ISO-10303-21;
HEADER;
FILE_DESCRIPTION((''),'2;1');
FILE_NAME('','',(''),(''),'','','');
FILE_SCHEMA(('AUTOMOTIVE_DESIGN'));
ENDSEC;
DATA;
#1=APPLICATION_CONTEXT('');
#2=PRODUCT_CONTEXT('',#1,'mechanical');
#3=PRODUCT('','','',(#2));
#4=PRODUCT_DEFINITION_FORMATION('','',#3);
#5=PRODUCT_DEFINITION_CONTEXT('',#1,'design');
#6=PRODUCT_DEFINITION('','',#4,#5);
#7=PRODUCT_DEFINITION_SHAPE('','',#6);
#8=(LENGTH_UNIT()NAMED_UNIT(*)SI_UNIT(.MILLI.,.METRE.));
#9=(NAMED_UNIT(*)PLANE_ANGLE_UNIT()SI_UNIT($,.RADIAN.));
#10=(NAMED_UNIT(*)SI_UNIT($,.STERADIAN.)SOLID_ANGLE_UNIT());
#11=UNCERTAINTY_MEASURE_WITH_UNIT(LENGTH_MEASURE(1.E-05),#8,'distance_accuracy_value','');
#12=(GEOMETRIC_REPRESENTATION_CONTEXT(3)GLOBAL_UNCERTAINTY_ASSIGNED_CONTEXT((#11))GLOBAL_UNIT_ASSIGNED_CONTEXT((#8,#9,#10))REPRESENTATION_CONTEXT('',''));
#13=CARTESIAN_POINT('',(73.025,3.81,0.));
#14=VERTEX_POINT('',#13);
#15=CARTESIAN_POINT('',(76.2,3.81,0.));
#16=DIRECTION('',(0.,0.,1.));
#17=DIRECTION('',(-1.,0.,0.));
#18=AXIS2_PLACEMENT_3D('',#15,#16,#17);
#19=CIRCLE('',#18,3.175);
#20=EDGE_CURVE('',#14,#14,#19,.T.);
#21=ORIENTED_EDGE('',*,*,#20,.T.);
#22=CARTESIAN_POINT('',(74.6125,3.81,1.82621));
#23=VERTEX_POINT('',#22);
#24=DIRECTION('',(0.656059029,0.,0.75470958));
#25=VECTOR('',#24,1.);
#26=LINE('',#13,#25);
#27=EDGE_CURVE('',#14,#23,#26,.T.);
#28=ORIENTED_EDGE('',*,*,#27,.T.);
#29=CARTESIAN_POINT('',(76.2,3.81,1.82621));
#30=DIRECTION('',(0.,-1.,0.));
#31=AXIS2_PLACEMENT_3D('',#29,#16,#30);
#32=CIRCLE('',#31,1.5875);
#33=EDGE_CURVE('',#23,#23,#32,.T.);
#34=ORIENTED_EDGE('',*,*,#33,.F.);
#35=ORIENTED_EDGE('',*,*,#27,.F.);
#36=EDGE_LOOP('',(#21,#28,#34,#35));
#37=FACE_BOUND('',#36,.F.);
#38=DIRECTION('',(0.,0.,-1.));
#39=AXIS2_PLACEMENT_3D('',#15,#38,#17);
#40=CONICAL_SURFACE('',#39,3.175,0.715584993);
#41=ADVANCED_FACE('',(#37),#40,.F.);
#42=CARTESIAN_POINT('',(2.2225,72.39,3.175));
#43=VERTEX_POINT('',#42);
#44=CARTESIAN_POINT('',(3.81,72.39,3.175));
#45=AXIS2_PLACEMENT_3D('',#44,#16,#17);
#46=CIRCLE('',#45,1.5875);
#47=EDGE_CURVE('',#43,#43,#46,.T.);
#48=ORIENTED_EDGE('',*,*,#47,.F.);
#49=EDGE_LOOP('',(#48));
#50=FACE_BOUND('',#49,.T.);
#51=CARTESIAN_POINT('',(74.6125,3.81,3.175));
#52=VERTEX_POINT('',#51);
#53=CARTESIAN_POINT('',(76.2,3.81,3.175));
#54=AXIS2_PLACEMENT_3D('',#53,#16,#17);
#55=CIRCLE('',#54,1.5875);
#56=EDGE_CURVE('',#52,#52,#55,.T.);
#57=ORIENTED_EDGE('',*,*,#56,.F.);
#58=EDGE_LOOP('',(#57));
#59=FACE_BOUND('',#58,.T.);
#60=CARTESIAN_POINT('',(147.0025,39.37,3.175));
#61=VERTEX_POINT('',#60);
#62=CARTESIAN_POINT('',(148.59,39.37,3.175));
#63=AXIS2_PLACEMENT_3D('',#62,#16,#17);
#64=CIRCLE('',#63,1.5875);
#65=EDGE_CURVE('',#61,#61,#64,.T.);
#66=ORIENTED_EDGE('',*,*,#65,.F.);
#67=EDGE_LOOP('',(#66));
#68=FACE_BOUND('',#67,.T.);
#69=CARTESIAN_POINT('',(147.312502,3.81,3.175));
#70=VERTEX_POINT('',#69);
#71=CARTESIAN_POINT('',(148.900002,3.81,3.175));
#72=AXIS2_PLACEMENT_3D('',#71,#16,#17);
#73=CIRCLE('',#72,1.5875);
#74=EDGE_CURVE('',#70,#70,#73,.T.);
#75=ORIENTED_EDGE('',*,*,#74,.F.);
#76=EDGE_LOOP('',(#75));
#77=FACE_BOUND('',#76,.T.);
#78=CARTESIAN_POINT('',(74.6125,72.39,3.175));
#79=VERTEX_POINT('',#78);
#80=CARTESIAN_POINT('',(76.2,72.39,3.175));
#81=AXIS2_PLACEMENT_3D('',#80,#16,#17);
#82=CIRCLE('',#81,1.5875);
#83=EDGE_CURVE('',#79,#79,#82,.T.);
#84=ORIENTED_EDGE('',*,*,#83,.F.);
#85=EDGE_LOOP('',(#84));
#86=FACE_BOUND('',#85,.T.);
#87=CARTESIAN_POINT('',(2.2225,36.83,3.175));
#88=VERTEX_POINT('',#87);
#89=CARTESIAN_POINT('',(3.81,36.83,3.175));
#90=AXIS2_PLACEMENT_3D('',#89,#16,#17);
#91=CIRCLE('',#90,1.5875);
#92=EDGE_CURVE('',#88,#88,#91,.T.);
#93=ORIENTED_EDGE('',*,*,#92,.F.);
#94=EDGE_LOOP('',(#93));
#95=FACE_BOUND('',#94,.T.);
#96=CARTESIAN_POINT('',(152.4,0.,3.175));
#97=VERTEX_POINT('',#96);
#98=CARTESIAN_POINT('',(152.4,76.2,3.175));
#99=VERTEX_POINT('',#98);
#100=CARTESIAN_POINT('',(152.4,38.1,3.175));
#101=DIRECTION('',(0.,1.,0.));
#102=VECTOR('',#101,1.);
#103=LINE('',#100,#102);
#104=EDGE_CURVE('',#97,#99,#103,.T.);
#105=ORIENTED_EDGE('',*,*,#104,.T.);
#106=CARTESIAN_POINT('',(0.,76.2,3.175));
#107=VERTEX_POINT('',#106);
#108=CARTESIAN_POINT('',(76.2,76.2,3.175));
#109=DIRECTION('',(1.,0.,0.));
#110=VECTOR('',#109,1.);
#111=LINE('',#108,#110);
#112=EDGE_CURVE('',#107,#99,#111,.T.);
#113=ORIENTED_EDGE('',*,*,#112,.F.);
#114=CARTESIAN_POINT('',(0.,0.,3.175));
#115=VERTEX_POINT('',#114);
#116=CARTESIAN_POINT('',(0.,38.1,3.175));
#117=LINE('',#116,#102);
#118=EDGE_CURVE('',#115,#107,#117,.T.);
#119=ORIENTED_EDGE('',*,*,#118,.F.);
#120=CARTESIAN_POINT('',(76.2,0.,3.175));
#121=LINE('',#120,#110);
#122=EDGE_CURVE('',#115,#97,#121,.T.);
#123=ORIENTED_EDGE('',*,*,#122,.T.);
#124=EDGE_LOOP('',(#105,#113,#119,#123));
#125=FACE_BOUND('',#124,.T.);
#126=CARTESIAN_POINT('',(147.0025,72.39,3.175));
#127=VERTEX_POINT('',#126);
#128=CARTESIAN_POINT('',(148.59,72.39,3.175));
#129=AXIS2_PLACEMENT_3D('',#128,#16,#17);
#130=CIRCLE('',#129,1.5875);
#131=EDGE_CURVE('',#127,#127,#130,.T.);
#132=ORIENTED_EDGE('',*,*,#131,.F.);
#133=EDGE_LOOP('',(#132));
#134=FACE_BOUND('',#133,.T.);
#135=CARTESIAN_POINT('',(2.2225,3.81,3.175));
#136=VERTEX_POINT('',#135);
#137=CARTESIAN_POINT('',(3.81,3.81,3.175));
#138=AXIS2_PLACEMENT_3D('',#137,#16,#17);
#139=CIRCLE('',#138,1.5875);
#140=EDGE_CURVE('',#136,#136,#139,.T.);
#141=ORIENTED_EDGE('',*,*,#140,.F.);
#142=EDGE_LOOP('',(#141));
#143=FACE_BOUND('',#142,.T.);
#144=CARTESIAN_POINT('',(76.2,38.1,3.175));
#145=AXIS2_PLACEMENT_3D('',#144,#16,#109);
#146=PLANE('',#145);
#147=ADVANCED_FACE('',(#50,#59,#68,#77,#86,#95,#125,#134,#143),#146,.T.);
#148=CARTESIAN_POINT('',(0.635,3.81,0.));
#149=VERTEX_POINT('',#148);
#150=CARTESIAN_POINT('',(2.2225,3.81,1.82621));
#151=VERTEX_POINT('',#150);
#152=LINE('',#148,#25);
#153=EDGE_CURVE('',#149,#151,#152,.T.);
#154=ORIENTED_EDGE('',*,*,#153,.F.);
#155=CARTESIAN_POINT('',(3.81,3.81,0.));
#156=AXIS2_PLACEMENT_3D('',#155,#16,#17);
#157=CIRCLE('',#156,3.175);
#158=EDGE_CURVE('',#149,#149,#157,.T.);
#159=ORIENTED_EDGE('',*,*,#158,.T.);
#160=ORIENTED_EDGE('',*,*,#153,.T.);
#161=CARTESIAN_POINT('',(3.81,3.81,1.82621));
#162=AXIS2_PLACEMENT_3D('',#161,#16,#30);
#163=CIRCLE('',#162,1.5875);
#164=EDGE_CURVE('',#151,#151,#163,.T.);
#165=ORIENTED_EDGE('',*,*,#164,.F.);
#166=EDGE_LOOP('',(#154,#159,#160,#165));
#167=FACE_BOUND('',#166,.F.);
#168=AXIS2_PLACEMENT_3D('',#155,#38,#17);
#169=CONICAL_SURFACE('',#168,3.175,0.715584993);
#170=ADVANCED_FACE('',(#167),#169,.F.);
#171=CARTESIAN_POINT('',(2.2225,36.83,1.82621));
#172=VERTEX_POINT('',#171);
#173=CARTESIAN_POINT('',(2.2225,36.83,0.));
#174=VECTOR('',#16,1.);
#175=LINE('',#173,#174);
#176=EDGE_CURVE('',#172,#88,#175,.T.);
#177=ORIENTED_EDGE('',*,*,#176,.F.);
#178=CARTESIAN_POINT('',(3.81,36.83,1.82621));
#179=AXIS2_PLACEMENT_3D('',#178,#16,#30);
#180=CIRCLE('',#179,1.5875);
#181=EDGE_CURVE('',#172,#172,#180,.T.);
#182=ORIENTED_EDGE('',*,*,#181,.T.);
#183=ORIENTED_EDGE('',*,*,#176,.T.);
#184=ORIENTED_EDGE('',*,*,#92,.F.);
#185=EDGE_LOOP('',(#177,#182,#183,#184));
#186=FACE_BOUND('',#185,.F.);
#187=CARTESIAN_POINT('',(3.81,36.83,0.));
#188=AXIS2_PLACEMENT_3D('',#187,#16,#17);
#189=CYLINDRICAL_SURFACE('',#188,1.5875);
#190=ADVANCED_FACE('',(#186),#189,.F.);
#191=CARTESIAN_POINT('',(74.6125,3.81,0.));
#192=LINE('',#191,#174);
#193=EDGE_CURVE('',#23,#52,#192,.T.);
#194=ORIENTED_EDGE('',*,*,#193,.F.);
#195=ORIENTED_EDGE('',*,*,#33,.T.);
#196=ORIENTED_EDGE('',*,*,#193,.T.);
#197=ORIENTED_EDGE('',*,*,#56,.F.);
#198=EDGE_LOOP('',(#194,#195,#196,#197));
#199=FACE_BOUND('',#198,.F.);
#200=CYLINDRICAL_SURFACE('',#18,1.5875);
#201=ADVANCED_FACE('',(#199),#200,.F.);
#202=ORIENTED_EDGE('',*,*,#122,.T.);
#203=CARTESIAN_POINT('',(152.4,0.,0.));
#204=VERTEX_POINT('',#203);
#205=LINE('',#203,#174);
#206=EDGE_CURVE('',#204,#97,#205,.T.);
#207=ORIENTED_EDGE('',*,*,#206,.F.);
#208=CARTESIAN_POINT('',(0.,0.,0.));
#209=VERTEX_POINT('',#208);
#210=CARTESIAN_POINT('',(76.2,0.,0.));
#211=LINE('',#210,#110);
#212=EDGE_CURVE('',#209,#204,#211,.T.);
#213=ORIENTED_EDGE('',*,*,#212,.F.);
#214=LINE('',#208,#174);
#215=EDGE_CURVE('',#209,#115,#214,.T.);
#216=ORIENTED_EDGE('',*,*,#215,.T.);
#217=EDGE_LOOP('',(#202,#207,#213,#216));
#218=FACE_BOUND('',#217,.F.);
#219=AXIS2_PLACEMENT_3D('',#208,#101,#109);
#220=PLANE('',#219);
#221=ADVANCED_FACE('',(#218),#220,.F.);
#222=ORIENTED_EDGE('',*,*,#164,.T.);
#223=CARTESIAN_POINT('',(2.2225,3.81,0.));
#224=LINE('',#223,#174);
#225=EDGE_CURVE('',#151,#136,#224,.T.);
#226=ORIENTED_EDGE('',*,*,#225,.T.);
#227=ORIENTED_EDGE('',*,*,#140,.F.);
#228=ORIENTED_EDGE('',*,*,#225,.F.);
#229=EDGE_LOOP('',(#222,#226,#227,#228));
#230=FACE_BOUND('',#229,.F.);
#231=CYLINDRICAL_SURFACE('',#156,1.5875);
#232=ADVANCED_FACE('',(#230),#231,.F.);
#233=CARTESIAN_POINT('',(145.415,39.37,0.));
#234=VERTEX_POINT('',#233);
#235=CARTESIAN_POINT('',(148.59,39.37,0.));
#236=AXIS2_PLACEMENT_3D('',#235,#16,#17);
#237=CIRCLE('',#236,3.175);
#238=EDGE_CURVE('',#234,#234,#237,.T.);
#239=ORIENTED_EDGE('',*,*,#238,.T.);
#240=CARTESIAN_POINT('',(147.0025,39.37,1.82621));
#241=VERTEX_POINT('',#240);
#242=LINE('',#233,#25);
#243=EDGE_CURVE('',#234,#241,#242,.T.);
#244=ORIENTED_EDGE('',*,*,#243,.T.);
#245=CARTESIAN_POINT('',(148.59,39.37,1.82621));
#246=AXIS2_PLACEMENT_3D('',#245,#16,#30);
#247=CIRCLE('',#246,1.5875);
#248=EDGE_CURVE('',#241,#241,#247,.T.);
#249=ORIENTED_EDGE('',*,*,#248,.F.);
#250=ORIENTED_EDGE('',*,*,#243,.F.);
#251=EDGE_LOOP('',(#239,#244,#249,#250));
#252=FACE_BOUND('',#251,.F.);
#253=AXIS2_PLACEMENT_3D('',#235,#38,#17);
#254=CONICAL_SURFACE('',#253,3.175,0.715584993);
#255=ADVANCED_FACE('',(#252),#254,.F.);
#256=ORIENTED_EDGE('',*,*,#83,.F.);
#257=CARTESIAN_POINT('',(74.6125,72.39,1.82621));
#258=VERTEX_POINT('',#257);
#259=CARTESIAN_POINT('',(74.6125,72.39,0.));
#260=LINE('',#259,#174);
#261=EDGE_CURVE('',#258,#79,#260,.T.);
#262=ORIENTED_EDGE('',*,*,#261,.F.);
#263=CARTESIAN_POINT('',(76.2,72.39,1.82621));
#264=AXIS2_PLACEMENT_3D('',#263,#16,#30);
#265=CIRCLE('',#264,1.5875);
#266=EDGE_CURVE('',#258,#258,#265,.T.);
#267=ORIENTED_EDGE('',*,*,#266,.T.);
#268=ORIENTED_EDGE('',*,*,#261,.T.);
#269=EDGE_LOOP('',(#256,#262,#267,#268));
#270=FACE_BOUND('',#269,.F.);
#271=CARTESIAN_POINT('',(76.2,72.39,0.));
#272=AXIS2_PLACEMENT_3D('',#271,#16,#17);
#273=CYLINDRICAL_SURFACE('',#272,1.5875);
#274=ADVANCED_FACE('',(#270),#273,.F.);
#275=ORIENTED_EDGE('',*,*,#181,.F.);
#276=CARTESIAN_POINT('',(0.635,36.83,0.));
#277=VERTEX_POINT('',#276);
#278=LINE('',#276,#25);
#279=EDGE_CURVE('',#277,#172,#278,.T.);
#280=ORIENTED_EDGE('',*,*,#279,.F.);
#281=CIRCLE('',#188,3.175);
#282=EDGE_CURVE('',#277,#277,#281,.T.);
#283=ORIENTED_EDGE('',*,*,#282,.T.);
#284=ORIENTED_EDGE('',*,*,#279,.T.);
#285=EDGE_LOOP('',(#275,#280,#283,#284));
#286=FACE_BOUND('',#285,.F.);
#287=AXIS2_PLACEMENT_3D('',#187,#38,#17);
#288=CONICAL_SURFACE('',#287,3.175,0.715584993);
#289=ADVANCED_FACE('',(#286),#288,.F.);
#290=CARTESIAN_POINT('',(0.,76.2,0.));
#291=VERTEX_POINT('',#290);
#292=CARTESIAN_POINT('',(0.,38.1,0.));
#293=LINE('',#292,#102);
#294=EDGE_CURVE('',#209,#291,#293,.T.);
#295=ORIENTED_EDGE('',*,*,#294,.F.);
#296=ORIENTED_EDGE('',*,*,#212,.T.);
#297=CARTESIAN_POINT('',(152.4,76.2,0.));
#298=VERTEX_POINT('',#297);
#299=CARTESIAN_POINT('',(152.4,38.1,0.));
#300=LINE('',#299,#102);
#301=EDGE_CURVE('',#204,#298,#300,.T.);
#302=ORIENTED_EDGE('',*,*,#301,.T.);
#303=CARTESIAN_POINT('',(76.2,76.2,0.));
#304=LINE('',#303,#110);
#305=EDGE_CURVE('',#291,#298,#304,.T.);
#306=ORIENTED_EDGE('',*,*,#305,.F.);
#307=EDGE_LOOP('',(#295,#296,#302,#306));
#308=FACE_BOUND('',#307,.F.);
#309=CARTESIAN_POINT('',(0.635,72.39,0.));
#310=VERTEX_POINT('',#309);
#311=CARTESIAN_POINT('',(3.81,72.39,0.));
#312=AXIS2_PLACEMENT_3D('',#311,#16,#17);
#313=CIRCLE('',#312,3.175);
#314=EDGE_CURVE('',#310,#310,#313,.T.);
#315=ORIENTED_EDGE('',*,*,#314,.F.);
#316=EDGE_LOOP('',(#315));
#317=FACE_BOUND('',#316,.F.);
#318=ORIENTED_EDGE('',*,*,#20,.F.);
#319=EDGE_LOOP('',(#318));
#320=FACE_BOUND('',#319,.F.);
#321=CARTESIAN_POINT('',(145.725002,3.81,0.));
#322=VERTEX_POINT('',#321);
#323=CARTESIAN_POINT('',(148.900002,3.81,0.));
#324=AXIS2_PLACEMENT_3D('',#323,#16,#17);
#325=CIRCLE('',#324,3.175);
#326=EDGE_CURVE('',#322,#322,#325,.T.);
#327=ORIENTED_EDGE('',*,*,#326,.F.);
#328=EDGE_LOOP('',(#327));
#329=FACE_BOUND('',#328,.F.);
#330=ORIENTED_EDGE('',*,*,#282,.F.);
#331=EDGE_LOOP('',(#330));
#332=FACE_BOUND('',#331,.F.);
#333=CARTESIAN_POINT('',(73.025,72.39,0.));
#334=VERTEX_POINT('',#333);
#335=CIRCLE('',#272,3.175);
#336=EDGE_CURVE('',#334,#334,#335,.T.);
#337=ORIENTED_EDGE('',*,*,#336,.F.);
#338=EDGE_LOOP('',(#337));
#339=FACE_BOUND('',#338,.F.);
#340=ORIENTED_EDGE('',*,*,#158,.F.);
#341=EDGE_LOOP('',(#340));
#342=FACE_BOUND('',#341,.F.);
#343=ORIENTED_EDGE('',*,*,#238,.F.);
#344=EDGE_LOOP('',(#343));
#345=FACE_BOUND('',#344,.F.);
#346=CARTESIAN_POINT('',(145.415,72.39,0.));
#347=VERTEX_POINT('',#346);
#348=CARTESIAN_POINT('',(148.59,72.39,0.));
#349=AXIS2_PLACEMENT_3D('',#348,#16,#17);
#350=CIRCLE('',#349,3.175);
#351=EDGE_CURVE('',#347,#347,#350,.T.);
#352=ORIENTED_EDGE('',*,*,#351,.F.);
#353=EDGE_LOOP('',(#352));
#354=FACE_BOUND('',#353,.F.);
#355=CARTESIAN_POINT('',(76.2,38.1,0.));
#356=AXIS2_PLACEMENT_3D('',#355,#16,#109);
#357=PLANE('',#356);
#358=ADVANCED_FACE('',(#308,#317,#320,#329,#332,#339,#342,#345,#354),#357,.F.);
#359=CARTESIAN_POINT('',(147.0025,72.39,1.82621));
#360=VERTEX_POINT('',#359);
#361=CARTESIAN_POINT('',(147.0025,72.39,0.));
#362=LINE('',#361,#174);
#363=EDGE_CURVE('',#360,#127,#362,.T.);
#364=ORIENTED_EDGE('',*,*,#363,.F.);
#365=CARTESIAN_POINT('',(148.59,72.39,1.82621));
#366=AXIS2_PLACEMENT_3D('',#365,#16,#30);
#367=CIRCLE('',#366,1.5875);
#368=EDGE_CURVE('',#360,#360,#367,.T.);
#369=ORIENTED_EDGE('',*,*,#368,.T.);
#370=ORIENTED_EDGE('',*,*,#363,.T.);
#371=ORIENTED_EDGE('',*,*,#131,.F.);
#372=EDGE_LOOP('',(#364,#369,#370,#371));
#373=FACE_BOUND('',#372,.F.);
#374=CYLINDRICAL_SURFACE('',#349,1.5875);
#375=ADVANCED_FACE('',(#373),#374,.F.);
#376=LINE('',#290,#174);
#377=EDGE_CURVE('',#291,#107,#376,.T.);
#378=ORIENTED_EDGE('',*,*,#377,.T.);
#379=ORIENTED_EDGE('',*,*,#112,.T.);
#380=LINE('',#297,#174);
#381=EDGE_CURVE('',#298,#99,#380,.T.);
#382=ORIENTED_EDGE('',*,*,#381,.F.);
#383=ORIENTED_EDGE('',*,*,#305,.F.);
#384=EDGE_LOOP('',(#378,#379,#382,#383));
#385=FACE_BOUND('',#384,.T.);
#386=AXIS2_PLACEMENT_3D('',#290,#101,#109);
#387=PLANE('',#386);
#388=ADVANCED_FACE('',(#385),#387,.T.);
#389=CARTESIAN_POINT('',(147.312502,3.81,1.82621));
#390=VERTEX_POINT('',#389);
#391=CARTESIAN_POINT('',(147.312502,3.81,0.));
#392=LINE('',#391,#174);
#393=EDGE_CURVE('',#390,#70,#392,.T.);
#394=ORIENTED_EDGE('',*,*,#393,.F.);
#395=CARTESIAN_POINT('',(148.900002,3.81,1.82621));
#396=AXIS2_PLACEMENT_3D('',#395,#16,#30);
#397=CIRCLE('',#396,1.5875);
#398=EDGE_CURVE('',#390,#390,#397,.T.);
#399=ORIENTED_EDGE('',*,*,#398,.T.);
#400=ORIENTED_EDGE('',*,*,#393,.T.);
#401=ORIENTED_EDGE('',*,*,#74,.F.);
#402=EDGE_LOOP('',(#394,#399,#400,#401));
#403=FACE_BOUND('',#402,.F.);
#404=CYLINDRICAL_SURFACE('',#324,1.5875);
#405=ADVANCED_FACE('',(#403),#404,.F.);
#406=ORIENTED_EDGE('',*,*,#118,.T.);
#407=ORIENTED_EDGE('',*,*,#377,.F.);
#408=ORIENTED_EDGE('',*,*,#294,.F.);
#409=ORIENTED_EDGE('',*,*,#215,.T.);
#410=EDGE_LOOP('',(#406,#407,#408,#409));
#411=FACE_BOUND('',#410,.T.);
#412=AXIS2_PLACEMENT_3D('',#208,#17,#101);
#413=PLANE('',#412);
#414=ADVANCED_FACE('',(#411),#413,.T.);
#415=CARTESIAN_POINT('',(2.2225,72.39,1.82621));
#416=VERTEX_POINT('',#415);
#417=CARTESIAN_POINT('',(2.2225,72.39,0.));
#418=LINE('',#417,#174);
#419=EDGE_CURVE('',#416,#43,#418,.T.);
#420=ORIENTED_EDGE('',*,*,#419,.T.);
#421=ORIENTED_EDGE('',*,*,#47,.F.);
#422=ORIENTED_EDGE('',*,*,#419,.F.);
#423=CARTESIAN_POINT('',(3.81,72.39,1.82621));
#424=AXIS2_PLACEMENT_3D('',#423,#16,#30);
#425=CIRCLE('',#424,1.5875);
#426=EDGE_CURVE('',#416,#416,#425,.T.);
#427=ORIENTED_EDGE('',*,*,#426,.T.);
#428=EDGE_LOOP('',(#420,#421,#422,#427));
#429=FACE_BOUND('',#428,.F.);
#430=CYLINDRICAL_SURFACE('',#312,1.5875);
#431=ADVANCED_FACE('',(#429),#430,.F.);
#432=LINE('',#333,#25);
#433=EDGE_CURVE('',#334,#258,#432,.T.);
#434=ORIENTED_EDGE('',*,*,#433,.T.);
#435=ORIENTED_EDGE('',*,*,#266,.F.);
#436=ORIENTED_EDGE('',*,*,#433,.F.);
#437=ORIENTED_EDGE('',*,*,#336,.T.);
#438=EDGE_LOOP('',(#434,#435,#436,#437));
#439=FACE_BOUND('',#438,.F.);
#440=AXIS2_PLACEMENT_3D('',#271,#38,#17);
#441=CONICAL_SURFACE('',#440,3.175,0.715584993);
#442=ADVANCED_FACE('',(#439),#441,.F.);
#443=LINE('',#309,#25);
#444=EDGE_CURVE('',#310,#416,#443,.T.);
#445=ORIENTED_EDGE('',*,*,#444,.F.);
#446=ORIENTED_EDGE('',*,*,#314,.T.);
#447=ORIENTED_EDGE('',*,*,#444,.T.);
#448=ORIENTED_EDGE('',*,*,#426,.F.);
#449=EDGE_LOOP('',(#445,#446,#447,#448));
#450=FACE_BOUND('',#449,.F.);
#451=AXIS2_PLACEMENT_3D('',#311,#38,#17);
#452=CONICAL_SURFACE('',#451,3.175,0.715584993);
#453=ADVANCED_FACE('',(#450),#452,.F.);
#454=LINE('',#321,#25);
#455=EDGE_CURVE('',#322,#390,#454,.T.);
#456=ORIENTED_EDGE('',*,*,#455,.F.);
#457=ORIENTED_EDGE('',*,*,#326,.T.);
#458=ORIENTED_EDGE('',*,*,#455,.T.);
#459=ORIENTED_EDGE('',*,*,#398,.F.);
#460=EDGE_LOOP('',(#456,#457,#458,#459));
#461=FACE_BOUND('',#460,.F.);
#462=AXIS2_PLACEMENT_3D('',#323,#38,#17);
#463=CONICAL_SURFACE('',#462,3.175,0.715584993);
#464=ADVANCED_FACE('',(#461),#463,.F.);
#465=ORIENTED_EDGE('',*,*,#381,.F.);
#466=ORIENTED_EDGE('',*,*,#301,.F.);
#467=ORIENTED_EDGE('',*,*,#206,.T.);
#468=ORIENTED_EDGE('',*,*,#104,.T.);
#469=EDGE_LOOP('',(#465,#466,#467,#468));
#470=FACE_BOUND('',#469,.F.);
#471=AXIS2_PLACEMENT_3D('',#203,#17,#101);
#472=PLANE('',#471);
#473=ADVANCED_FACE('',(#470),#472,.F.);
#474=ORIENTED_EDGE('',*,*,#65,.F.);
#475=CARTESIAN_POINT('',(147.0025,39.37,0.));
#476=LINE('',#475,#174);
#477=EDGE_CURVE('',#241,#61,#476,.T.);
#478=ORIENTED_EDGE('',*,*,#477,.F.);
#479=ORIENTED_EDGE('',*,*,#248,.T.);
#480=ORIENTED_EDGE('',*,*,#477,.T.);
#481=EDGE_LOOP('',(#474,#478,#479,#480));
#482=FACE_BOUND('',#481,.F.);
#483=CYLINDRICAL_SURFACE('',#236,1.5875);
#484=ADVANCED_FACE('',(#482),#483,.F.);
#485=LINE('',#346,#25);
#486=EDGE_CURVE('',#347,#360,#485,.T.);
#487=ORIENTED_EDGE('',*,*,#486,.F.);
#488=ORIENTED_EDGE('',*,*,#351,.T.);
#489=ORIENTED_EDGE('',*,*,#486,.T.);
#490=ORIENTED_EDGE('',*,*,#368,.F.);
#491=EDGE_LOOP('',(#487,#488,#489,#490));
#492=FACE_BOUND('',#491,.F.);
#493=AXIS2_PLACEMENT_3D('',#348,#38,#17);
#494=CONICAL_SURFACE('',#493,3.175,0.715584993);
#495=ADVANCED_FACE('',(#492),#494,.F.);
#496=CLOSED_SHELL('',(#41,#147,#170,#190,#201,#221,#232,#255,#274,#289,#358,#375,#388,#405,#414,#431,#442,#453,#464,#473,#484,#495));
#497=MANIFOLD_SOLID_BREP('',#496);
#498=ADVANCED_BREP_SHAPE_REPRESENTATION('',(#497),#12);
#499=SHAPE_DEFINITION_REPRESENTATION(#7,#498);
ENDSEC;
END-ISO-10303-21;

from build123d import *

# Parameters (mm, degrees)
F0_W           = 152.4
F0_H           = 76.2
F1_DEPTH       = 3.175
F3_D           = 3.175
F3_CSINK_D     = 6.35
F3_CSINK_ANGLE = 82


# Not quite as in the source:
# - a feature names something its author has since deleted; it is built from what else it names


with BuildPart() as f1:
    # F0 (on Top) → F1 (new body)
    with BuildSketch(Plane.XY):
        with Locations((76.2, 38.1)):
            Rectangle(F0_W, F0_H)
    extrude(amount=F1_DEPTH)

    # F3 (through all)
    with Locations(Plane(origin=(0, 0, 0), x_dir=(1, 0, 0), z_dir=(0, 0, -1))):
        with Locations((3.81, -3.81), (3.81, -36.83), (3.81, -72.39), (148.59, -72.39), (148.59, -39.37), (148.59, -457.2), (76.2, -3.81), (76.2, -72.39), (148.9000022411, -3.81)):
            CounterSinkHole(F3_D / 2, F3_CSINK_D / 2, counter_sink_angle=F3_CSINK_ANGLE)


solid = f1.part
